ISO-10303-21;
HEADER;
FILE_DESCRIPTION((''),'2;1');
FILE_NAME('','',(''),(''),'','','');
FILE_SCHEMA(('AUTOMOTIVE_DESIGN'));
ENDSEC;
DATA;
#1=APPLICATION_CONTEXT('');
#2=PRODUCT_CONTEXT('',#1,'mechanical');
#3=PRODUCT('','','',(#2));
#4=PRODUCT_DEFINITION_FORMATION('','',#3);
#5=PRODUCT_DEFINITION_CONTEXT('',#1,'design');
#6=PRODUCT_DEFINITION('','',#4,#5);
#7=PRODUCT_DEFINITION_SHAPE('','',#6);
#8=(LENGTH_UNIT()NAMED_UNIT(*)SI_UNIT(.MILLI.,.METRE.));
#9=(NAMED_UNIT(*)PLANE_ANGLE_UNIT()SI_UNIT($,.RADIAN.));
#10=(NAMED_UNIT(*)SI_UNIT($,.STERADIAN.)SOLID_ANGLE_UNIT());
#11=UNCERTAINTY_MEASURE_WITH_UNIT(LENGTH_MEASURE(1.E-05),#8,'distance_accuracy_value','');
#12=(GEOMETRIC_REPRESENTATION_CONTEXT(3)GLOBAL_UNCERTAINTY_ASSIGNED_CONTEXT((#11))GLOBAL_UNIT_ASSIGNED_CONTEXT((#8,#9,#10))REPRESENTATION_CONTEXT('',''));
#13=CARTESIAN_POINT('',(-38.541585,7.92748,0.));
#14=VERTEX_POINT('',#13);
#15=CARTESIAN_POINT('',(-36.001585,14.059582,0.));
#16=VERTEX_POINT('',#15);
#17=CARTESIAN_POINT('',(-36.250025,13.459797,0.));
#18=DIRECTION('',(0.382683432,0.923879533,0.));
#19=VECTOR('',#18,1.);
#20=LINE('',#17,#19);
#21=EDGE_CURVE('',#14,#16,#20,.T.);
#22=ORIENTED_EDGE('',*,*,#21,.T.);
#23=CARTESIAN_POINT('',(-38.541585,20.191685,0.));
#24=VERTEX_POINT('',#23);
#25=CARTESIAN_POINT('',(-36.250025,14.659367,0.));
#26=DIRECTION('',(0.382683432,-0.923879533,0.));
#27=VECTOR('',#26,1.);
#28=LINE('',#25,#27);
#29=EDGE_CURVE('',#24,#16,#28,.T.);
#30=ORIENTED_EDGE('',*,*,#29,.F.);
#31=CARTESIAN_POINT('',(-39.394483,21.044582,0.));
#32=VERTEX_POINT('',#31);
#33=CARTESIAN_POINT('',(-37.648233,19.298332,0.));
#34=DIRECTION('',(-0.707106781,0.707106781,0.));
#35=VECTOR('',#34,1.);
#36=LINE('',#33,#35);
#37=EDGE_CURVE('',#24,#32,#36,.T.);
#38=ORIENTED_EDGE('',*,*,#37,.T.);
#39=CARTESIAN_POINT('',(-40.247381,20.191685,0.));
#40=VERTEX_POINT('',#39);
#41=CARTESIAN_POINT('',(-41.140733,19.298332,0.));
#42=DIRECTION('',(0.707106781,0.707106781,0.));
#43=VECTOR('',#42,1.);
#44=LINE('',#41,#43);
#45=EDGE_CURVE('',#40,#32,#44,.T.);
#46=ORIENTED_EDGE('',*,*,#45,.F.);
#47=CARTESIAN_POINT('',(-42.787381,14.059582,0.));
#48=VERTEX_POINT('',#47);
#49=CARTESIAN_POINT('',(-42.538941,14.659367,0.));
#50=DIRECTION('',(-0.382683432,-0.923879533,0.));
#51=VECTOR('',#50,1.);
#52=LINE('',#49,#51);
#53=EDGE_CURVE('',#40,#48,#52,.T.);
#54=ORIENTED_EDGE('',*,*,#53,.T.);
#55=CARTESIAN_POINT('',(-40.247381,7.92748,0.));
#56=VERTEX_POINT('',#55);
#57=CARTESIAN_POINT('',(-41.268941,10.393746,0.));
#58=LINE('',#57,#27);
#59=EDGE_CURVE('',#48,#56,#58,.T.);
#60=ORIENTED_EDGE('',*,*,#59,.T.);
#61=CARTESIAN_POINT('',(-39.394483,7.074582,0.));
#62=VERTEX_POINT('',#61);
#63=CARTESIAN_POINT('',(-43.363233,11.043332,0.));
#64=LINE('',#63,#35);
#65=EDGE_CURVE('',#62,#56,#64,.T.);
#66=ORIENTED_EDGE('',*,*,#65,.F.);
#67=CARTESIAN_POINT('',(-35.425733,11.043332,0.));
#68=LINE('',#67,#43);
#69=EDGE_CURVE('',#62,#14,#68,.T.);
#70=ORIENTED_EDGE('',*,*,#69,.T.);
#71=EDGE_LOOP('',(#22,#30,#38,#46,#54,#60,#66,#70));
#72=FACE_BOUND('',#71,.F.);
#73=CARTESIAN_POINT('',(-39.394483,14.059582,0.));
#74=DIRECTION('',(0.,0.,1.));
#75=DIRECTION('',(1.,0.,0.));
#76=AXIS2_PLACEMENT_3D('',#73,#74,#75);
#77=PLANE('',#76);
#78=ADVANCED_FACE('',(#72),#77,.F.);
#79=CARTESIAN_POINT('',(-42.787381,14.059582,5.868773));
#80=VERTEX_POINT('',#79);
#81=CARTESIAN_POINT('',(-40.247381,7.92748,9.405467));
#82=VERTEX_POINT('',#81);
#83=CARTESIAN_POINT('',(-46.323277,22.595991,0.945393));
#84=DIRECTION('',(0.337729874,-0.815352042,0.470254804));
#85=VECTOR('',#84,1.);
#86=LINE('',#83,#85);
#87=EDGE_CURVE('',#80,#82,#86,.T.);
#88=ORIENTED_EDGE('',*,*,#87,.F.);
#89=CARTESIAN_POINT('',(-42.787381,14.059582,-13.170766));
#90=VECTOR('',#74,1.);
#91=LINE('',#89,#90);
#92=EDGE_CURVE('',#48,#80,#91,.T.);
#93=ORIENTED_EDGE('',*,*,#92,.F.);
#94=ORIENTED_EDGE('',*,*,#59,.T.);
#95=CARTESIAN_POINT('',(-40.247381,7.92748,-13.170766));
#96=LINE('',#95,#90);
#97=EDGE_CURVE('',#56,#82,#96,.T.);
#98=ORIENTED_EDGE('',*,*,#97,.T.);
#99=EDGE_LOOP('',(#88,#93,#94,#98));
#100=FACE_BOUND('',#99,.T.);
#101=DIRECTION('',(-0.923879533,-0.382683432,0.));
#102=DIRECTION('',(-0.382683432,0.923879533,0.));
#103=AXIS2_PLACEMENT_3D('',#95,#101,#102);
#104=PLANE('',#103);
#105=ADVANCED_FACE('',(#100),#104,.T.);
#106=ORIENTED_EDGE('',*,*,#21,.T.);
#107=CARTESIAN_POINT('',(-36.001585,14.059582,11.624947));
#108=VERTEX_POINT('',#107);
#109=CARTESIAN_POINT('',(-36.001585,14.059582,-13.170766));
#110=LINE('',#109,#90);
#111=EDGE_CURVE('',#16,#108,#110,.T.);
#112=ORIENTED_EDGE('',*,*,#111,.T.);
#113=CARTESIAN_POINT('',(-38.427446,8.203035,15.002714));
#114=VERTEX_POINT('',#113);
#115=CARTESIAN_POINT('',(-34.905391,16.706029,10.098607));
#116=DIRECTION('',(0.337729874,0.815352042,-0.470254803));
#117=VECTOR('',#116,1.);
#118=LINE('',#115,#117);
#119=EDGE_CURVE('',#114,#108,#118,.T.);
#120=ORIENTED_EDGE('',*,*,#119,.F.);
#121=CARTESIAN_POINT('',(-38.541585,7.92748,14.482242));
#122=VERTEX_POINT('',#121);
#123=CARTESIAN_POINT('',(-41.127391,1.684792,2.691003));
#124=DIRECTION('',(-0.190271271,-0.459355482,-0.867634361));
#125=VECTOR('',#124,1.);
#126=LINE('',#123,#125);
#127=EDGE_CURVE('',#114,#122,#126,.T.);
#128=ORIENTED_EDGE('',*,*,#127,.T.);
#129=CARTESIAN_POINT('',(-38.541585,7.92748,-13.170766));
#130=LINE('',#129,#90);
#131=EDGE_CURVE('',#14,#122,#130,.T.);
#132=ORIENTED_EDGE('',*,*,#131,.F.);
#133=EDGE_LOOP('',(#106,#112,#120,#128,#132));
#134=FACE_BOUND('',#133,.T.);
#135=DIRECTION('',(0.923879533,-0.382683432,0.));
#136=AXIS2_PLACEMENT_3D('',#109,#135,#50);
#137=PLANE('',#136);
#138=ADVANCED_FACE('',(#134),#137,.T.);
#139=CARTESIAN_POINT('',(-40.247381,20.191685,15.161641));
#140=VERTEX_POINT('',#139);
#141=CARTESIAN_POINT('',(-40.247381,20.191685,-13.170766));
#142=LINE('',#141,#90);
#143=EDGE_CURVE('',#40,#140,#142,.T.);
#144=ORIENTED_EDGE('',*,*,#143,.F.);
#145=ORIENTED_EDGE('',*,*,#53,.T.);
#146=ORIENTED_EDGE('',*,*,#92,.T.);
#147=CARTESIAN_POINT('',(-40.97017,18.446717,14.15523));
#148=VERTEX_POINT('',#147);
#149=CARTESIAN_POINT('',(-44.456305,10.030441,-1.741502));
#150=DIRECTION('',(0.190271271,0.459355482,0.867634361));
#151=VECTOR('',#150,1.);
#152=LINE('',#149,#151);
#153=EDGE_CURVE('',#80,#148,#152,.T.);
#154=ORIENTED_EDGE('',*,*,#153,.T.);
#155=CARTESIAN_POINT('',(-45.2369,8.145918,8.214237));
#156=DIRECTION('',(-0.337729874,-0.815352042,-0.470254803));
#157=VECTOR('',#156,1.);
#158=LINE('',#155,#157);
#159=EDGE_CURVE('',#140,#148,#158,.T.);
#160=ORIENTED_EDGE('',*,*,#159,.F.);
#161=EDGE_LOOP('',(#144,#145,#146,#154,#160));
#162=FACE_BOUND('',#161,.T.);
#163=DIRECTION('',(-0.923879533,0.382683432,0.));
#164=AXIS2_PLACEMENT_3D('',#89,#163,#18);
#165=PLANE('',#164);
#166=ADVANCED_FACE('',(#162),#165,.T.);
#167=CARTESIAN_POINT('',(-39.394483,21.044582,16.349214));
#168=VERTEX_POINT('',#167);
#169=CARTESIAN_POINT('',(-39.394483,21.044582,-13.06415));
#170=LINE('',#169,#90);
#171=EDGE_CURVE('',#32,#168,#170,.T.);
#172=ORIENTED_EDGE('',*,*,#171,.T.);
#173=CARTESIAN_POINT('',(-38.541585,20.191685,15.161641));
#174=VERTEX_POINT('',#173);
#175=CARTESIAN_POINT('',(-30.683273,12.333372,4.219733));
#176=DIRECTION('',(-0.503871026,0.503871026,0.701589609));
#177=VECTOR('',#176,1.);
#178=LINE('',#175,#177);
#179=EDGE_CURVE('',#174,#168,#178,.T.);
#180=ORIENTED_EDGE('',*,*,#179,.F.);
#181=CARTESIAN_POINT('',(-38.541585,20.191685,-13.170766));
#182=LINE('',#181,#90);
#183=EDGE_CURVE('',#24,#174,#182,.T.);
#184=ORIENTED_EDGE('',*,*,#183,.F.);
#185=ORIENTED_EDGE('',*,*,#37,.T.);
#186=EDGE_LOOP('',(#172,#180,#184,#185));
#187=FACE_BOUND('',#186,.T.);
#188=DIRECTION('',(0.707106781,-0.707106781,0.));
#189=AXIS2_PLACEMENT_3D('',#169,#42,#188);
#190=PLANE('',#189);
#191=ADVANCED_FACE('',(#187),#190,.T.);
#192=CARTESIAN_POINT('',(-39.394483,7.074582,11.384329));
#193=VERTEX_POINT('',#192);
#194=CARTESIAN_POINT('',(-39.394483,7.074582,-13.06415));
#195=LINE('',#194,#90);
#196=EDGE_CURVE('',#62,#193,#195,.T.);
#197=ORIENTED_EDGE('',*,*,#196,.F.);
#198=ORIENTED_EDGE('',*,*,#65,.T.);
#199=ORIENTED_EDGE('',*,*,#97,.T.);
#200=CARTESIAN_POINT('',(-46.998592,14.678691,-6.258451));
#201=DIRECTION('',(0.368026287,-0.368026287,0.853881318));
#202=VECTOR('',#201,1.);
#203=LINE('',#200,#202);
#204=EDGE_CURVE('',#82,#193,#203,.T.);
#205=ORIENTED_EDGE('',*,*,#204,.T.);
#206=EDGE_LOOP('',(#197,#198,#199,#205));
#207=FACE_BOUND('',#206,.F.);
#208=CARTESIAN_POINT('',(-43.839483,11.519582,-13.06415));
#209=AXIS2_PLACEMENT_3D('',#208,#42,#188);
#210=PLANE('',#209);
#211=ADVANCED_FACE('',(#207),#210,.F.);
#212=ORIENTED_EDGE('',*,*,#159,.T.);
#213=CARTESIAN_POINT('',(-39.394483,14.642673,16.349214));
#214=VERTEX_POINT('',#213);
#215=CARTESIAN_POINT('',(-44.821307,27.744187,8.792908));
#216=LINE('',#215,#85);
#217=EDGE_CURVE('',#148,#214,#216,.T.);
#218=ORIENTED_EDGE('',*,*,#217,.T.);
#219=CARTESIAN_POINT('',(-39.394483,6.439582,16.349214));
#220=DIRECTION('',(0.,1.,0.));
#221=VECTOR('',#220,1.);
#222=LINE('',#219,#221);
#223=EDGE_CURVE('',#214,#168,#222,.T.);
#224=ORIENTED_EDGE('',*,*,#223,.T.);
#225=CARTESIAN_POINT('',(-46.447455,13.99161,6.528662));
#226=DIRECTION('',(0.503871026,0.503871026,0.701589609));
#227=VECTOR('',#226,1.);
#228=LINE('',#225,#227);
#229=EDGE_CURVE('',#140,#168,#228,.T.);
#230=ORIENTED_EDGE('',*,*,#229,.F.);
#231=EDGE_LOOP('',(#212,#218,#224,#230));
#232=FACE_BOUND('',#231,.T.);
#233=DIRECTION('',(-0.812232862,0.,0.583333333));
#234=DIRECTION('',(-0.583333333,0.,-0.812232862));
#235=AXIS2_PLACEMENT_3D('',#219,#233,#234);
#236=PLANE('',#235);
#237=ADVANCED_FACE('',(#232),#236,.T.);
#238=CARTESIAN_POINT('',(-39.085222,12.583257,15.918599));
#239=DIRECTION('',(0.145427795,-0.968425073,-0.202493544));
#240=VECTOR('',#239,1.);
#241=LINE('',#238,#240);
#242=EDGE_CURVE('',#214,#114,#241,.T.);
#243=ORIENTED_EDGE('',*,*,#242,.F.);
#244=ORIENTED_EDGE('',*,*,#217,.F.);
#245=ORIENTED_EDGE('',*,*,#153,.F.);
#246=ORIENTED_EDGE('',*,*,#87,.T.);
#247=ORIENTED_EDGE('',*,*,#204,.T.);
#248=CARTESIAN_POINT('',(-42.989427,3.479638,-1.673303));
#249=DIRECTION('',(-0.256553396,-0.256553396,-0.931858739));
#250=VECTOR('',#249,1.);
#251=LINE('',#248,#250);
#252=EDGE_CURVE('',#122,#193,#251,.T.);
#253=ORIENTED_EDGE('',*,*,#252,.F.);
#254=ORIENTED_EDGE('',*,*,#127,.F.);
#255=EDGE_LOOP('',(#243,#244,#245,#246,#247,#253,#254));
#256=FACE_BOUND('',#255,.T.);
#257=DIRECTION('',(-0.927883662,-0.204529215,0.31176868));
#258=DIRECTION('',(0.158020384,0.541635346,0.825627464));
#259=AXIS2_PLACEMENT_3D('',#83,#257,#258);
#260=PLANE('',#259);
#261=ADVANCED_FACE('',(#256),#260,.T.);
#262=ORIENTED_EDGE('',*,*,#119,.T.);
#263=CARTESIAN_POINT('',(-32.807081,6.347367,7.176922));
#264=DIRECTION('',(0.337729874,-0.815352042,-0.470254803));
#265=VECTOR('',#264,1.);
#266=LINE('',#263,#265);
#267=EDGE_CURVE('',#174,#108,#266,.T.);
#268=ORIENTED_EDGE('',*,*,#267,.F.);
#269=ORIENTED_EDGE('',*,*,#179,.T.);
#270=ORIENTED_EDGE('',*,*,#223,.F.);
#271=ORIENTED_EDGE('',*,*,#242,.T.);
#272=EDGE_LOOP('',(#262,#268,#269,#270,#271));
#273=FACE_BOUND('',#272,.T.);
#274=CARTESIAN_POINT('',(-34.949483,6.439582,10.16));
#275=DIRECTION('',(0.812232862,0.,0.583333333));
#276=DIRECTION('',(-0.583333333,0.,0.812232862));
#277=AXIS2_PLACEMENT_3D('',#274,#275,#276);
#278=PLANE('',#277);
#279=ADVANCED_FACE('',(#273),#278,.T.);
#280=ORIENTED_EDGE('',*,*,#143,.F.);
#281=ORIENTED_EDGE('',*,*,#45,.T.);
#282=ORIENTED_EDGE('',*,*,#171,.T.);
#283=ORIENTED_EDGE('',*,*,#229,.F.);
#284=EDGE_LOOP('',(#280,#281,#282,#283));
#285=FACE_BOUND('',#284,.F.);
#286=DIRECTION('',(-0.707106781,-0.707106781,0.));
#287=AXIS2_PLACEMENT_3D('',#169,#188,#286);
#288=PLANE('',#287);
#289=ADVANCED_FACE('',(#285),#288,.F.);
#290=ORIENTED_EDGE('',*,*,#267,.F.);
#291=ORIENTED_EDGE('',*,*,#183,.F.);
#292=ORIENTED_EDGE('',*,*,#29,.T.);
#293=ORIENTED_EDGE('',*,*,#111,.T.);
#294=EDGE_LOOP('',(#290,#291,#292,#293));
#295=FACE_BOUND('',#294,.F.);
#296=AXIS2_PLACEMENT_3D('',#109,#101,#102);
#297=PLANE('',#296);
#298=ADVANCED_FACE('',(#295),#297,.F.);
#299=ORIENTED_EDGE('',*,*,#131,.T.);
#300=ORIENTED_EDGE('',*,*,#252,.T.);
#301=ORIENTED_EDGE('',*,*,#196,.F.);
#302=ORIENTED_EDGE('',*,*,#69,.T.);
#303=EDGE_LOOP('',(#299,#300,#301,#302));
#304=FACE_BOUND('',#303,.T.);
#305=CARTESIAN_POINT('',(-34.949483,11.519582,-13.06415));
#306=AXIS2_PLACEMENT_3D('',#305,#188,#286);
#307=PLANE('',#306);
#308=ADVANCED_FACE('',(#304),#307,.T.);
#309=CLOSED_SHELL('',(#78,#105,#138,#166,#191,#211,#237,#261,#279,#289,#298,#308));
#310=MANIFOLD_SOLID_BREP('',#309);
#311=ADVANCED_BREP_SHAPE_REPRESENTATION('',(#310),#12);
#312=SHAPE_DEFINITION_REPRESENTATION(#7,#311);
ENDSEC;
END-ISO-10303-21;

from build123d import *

# Parameters (mm, degrees)
F0_W        = 8.89
F0_H        = 15.24
F1_DEPTH    = 10.16
F3_DEPTH    = 15.24
F4_T1_DEPTH = 36.2882991577
F5_T1_DEPTH = 36.5015311919
F6_T1_DEPTH = 33.8737387742


# Not quite as in the source:
# - a fillet or chamfer that OpenCascade refuses, or shapes differently, is made with other operations: its cross-section is extruded or revolved along the edge and cut away or added


with BuildPart() as f1:
    # F0 (on Top) → F1 (new body)
    with BuildSketch(Plane.XY):
        with Locations((-39.3944829702, 14.0595820769)):
            Rectangle(F0_W, F0_H)
    extrude(amount=F1_DEPTH)

    # F2 (on face) → F3 (join)
    with BuildSketch(Plane.XZ.offset(-6.4395820769)):
        Polygon((-43.8394829702, 10.16), (-34.9494829702, 10.16), (-39.3944829702, 16.349214409), align=None)
    extrude(amount=-F3_DEPTH)

    # F4: chamfer of 5.08 on 4 edges, made by hand

    # F4_s2 → F4_t1 (cut)
    with BuildSketch(Plane.XY.offset(-13.0641495789)):
        Polygon((-34.9494829702, 11.5195820769), (-40.0294829702, 6.4395820769), (-34.9494829702, 6.4395820769), align=None)
        Polygon((-43.8394829702, 11.5195820769), (-38.7594829702, 6.4395820769), (-43.8394829702, 6.4395820769), align=None)
        Polygon((-40.0294829702, 21.6795820769), (-34.9494829702, 16.5995820769), (-34.9494829702, 21.6795820769), align=None)
        Polygon((-38.7594829702, 21.6795820769), (-43.8394829702, 16.5995820769), (-43.8394829702, 21.6795820769), align=None)
    extrude(amount=F4_T1_DEPTH, mode=Mode.SUBTRACT)

    # F5: chamfer of 5.08 on 4 edges, made by hand

    # F5_s2 → F5_t1 (cut)
    with BuildSketch(Plane.XY.offset(-13.170765596)):
        Polygon((-34.9494829702, 11.5195820769), (-38.5415854186, 20.1916845253), (-34.9494829702, 16.5995820769), align=None)
        Polygon((-34.9494829702, 16.5995820769), (-38.5415854186, 7.9274796285), (-34.9494829702, 11.5195820769), align=None)
        Polygon((-40.2473805218, 7.9274796285), (-43.8394829702, 16.5995820769), (-43.8394829702, 11.5195820769), align=None)
        Polygon((-43.8394829702, 11.5195820769), (-40.2473805218, 20.1916845253), (-43.8394829702, 16.5995820769), align=None)
    extrude(amount=F5_T1_DEPTH, mode=Mode.SUBTRACT)

    # F6: chamfer of 5.08 on 1 edges, made by hand

    # F6_s2 → F6_t1 (cut)
    with BuildSketch(Plane(origin=(-11.3557841109, 27.415288012, -15.8117846218), x_dir=(0.9238795325, 0.3826834324, 0), z_dir=(0.3377298738, -0.8153520418, 0.4702548035))):
        Polygon((-34.1500159871, 18.9876434675), (-30.7922479627, 27.8797024774), (-34.1500159871, 24.0676434675), align=None)
    extrude(amount=F6_T1_DEPTH, mode=Mode.SUBTRACT)


solid = f1.part
